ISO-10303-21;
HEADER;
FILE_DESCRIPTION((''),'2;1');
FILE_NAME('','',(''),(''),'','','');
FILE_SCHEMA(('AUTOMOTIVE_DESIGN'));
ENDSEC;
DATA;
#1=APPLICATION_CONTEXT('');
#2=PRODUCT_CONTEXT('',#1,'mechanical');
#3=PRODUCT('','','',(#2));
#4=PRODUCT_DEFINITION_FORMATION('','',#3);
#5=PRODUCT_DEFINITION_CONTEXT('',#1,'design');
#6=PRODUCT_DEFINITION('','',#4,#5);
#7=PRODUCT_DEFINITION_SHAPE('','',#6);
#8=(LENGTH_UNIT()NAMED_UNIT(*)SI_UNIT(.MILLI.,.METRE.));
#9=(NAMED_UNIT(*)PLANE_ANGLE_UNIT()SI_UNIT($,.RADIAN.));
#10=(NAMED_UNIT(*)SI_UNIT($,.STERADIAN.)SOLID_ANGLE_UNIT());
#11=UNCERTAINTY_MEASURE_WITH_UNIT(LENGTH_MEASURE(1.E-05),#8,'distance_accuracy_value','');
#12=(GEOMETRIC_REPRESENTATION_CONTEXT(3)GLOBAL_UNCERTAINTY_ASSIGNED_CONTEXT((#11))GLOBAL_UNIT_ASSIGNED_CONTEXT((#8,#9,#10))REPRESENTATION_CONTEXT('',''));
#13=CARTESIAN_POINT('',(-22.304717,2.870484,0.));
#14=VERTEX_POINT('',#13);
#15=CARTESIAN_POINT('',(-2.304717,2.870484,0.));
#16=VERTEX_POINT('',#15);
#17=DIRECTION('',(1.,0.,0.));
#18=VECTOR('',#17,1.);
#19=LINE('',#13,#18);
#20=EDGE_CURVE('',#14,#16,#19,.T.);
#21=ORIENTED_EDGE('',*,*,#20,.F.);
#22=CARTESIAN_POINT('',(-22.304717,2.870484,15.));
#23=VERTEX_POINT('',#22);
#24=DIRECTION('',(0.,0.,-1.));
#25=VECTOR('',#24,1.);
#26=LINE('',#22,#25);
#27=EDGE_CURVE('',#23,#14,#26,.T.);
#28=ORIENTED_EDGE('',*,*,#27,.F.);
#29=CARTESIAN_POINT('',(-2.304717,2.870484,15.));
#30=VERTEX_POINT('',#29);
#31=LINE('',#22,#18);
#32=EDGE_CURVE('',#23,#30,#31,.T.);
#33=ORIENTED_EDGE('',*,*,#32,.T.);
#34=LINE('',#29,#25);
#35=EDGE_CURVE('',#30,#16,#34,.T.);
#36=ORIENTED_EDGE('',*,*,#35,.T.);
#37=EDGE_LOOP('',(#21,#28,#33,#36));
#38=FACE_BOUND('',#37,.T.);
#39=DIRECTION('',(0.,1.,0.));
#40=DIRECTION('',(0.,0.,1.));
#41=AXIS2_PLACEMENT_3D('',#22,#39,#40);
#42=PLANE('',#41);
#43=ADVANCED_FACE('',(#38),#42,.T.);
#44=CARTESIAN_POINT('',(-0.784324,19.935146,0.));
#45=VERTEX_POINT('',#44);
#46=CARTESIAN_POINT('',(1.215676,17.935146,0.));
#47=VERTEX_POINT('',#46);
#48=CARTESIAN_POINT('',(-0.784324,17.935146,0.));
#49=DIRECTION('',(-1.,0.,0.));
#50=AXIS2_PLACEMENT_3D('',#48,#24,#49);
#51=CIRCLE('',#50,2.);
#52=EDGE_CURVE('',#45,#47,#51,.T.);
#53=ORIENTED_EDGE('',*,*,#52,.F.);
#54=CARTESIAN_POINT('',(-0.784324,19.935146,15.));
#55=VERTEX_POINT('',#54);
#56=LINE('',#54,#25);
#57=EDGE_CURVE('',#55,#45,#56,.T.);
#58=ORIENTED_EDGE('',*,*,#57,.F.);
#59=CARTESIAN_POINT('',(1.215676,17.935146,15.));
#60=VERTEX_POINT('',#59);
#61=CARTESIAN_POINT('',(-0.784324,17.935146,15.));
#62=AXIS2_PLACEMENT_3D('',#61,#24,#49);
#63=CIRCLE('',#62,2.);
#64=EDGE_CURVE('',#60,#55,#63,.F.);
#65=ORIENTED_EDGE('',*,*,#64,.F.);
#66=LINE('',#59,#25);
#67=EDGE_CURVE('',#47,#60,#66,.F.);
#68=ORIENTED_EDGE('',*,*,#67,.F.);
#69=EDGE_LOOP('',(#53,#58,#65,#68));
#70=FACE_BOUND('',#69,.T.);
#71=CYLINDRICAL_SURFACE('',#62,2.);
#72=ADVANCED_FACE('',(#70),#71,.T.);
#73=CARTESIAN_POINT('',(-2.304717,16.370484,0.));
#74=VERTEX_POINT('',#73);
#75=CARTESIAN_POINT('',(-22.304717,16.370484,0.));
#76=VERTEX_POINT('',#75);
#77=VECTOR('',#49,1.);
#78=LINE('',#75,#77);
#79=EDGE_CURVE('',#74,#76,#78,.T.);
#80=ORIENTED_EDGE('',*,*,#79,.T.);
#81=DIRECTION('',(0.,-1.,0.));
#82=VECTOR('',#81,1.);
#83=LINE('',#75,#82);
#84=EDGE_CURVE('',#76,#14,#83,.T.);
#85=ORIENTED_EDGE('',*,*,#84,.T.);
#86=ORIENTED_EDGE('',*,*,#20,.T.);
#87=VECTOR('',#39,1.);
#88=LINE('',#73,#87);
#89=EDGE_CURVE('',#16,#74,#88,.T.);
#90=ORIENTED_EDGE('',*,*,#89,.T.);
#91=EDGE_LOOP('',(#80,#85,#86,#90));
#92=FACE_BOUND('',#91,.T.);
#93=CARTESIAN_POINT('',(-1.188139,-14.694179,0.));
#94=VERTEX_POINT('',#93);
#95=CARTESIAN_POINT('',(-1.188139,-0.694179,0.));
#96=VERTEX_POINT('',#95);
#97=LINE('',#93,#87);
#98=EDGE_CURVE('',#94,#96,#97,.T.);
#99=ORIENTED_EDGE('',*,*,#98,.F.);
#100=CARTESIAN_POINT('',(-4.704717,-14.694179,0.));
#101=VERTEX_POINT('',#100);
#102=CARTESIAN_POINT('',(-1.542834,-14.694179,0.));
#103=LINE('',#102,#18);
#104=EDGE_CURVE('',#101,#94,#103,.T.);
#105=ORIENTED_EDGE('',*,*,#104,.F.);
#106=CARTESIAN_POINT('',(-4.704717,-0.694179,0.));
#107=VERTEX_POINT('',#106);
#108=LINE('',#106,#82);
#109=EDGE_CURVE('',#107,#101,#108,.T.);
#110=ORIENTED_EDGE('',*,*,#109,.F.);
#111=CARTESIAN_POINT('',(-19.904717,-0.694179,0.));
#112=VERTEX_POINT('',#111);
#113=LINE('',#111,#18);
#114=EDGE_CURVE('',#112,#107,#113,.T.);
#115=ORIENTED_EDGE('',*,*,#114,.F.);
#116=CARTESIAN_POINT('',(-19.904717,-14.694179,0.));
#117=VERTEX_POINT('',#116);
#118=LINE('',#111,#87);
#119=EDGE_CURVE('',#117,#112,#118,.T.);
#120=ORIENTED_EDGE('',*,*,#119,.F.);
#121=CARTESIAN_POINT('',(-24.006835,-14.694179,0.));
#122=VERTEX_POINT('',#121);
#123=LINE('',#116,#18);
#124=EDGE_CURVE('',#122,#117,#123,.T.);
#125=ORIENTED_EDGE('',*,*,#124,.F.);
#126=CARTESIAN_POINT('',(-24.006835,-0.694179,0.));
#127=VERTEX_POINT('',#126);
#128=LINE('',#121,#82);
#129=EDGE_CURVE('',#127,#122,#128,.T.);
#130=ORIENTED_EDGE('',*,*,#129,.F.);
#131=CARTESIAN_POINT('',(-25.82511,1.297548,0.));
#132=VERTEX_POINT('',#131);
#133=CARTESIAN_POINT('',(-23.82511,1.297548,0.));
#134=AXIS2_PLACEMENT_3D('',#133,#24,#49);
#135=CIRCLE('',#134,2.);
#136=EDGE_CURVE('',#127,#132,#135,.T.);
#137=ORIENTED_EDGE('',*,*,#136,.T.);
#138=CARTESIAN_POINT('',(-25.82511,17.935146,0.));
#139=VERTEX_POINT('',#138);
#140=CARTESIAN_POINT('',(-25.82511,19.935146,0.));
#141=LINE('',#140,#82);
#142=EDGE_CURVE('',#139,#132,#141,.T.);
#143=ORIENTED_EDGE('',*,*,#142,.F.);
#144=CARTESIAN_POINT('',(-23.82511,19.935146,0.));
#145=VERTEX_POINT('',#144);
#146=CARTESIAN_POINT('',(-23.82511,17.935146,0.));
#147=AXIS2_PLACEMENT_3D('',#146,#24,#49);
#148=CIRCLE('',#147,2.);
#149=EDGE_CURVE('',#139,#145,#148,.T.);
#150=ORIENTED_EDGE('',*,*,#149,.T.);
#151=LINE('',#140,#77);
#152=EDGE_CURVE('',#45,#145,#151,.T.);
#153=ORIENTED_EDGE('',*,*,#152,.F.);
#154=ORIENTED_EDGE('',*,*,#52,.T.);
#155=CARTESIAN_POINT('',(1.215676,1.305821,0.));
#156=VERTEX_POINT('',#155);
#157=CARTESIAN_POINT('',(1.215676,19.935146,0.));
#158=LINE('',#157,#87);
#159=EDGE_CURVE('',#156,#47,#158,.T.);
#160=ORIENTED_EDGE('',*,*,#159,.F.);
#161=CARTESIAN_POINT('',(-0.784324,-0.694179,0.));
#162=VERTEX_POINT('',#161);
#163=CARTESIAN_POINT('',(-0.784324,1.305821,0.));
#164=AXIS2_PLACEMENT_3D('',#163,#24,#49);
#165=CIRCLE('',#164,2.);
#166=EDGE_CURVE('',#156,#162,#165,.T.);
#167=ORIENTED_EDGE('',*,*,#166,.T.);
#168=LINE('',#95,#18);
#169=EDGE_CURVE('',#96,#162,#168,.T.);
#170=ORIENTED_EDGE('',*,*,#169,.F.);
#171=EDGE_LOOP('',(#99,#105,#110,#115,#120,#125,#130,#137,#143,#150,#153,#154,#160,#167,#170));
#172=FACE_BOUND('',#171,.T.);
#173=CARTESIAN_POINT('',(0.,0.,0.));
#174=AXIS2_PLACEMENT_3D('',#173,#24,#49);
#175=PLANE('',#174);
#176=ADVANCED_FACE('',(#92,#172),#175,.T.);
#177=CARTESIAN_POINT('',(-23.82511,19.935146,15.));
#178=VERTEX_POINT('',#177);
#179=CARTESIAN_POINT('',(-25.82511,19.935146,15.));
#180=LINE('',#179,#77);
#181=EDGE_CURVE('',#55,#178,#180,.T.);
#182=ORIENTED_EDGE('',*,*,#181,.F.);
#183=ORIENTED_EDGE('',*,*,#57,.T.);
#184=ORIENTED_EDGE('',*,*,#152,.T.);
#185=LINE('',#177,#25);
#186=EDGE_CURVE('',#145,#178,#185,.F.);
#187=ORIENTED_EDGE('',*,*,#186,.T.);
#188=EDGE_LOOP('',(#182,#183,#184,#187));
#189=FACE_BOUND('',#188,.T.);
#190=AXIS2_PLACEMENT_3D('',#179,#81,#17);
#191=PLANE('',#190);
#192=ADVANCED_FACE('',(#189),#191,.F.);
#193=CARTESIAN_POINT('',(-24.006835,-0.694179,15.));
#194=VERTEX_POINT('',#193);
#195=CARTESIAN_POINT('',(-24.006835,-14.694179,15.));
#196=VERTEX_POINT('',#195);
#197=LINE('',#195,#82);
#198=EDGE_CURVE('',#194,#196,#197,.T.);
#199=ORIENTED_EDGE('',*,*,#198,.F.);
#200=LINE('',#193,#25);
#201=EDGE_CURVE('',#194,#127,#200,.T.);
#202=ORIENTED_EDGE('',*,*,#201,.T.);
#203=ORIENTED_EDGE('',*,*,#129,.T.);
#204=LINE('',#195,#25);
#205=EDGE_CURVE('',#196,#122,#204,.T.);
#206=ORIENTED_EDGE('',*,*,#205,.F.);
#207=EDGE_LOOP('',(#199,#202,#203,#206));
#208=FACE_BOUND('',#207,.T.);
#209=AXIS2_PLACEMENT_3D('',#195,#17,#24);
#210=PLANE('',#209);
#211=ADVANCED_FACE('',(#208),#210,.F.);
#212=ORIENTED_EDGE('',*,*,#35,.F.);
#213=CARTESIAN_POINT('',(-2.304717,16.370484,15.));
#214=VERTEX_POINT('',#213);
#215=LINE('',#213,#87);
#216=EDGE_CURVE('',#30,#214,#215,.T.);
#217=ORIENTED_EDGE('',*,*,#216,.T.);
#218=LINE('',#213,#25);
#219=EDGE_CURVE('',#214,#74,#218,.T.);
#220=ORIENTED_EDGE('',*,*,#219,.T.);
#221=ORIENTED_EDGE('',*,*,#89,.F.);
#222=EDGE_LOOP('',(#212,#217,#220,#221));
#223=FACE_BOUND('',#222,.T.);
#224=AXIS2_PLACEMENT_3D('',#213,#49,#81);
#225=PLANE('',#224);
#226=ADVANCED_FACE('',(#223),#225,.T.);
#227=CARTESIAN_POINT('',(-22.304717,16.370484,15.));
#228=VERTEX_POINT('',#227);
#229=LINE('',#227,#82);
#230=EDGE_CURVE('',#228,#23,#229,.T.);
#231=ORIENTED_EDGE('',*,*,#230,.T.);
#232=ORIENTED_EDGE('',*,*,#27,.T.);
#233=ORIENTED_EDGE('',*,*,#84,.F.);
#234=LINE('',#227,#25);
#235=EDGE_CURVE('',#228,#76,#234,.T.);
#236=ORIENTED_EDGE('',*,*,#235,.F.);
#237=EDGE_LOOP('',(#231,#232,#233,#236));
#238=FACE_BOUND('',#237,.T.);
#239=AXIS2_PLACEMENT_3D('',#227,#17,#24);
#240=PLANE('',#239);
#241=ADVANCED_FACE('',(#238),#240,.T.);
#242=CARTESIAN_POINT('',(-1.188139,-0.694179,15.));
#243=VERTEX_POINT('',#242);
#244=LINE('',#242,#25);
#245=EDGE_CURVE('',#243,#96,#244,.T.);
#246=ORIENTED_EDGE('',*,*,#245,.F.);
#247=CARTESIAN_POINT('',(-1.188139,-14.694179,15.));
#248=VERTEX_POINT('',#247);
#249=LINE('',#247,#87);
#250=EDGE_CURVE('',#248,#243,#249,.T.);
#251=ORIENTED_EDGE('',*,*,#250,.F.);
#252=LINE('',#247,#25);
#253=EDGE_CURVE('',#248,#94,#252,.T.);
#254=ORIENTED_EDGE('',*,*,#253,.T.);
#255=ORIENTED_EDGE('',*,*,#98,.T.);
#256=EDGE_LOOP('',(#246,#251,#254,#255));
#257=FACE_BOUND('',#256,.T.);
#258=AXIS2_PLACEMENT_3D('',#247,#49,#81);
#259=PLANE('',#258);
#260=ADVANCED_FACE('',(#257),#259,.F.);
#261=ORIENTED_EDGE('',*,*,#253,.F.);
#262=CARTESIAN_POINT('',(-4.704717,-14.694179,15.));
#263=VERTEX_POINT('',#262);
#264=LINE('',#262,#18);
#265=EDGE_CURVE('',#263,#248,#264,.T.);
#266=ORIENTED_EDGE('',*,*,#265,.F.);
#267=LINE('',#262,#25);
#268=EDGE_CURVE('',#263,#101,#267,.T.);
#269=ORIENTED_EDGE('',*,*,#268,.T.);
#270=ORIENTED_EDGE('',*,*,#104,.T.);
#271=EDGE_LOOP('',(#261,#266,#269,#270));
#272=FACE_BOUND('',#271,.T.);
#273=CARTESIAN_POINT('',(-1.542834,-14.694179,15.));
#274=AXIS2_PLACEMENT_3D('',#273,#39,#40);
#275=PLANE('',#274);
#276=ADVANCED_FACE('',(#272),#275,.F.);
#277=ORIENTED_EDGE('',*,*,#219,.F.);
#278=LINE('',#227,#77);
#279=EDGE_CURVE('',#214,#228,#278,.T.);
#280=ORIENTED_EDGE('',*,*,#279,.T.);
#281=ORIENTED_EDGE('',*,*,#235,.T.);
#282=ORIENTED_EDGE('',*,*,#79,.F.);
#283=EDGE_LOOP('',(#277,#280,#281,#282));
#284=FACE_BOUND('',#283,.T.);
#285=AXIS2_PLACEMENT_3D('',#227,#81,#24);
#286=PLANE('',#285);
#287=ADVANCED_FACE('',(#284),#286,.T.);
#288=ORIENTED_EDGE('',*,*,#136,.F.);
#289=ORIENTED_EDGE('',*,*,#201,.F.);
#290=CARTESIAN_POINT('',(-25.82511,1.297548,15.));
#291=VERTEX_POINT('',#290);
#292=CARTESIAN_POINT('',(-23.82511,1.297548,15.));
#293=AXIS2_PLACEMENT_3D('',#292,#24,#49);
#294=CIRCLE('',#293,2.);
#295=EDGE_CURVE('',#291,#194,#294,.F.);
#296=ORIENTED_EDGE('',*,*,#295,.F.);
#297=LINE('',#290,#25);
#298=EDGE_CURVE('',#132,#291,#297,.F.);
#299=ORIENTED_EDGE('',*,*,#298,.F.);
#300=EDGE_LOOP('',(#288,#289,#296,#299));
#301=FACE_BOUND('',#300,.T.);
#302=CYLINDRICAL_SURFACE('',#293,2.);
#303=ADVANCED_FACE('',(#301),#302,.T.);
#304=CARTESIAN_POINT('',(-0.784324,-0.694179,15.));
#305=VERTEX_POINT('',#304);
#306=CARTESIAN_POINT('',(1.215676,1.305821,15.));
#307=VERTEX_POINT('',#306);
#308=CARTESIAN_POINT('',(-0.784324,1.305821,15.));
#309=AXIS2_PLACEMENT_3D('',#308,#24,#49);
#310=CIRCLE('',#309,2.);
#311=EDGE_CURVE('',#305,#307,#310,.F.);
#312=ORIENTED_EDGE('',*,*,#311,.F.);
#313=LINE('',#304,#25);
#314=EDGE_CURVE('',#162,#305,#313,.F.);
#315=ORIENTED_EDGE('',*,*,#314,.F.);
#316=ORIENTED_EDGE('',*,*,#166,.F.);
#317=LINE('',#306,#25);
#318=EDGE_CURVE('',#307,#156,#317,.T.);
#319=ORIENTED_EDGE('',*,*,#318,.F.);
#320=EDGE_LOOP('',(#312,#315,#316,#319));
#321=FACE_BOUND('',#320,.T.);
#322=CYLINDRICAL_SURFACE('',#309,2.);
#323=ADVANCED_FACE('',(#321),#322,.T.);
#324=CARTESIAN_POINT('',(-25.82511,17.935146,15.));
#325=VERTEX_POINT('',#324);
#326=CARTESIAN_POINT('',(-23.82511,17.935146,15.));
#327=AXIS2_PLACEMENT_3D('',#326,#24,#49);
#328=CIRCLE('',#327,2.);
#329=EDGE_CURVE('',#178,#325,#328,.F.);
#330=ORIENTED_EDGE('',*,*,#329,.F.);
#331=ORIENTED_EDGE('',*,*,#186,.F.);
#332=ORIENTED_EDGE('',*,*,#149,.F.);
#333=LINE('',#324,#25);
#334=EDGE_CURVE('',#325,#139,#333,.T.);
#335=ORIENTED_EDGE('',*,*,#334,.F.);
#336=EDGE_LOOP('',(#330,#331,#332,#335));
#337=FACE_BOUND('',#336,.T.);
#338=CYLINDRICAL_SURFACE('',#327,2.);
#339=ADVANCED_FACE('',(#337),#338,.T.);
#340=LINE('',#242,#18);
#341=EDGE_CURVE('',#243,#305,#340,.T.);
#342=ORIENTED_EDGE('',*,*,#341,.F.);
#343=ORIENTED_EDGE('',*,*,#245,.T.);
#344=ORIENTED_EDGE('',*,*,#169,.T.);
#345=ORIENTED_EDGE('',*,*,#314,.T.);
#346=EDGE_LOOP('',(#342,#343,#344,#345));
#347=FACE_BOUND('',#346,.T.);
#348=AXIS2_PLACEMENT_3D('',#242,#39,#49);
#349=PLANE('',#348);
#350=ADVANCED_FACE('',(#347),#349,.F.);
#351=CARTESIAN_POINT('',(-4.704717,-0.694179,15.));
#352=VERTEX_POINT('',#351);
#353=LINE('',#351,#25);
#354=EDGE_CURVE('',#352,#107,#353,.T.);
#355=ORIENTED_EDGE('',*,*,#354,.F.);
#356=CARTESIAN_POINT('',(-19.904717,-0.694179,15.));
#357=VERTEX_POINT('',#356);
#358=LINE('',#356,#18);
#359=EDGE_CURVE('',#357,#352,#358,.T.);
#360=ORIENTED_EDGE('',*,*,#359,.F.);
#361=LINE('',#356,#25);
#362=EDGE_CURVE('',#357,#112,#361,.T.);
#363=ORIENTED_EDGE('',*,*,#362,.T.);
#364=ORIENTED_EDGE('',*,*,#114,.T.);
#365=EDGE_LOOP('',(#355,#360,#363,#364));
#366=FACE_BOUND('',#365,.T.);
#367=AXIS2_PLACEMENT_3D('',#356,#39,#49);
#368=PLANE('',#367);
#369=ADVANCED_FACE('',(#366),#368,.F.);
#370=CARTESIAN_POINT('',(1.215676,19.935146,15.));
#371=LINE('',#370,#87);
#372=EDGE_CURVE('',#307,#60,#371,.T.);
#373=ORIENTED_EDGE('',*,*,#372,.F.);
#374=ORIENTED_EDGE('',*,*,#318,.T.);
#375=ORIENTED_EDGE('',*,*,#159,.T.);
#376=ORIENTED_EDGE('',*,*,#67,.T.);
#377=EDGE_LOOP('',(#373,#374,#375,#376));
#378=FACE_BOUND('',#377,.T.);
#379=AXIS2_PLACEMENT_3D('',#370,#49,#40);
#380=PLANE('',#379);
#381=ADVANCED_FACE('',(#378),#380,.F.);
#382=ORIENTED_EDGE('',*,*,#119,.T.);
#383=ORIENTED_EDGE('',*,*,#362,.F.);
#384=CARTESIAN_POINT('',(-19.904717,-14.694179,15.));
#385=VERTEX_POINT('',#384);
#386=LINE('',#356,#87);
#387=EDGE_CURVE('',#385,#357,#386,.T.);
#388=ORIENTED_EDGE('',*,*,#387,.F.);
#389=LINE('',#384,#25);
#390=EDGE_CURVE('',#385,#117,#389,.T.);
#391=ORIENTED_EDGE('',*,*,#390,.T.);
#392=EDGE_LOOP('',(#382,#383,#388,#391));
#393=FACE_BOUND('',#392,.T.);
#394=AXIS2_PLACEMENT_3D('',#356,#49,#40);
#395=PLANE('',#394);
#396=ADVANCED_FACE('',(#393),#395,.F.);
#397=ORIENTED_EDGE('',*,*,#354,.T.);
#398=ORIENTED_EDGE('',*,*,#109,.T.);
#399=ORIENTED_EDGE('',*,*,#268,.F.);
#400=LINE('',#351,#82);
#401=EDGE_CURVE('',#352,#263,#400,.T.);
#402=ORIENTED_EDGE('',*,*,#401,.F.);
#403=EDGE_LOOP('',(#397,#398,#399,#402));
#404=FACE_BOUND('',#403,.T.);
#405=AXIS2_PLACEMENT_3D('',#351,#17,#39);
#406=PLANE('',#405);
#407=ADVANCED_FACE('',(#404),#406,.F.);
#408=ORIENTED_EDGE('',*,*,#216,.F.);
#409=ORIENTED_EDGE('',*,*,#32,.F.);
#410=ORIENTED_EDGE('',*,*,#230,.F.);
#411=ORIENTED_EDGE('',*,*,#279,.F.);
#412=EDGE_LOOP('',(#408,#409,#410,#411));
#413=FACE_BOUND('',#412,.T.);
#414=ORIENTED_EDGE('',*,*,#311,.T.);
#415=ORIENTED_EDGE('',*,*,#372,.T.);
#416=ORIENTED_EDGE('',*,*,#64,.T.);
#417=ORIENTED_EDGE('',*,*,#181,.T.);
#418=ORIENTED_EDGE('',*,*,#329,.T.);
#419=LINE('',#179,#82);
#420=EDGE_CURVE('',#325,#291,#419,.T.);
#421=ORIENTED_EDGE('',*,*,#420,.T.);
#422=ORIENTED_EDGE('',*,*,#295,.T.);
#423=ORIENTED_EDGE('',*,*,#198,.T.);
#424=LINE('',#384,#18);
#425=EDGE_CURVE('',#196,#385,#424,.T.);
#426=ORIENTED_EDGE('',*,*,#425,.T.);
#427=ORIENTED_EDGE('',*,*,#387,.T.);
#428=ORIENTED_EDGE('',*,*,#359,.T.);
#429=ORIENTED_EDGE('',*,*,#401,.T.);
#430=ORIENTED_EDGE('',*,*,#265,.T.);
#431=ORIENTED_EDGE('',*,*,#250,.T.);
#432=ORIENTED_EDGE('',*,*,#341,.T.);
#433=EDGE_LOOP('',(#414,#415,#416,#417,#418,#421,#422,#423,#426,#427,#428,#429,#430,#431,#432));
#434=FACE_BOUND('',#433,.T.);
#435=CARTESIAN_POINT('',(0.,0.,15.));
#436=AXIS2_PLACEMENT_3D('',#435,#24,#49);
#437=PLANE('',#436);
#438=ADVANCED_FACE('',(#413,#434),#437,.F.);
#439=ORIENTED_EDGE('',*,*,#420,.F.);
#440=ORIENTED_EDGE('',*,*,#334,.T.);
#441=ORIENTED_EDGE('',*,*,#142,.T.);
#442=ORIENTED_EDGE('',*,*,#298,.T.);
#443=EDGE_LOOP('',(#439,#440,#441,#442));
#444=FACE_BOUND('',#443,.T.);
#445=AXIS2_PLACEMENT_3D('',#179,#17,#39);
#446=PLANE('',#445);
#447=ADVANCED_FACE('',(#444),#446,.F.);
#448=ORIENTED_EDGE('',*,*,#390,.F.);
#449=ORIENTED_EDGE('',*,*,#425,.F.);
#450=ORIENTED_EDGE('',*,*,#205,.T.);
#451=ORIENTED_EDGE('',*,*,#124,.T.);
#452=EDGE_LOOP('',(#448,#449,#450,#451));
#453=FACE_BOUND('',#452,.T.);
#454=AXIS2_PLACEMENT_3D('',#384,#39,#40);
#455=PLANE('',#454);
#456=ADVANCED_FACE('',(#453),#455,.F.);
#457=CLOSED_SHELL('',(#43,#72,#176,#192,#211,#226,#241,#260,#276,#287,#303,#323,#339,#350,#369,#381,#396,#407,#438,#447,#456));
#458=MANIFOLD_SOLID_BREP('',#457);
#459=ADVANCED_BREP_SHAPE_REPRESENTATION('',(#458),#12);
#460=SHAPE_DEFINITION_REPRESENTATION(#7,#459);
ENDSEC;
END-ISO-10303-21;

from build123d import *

# Parameters (mm, degrees)
SKETCH1_W           = 20
SKETCH1_H           = 13.5
BOSS_EXTRUDE1_DEPTH = 15
FILLET1_R           = 2


with BuildPart() as part:
    # Sketch1 → Boss-Extrude1 (new body)
    with BuildSketch(Plane.XY):
        Polygon((-25.825109991, 19.935146109), (1.215675598, 19.935146109), (1.215675598, -0.694178906), (-1.188139158, -0.694178906), (-1.188139158, -14.694178906), (-1.542833918, -14.694178906), (-4.704717196, -14.694178906), (-4.704717196, -0.694178906), (-19.904717196, -0.694178906), (-19.904717196, -14.694178906), (-24.006835368, -14.694178906), (-24.006835368, -0.694178906), (-25.825109991, -0.694178906), align=None)
        with Locations((-12.304717196, 9.620483601)):
            Rectangle(SKETCH1_W, SKETCH1_H, mode=Mode.SUBTRACT)
    extrude(amount=BOSS_EXTRUDE1_DEPTH)

    # Fillet1
    # the kernel refuses this fillet: 2 mm, written as the material it takes off along each edge
    with BuildSketch(Plane(origin=(-25.825109991, -0.694178906, -4.979317152), x_dir=(1, 0, 0), z_dir=(0, 0, 1))) as fillet1_piece_1:
        with BuildLine():
            CenterArc((2, 1.991726861), FILLET1_R, 180, 84.786761144)
            Line((0, 1.991726861), (-0.04, 1.991726861))
            Line((-0.04, 1.991726861), (-0.04, 0))
            Line((-0.04, 0), (0, -0.04))
            ThreePointArc((0, -0.04), (0.909137312, -0.04), (1.814640116, -0.039834537))
            Line((1.814640116, -0.039834537), (1.818274623, 0))
        make_face()
    extrude(amount=24.958634303, mode=Mode.SUBTRACT)
    with BuildSketch(Plane(origin=(-25.825109991, 19.935146109, -5), x_dir=(1, 0, 0), z_dir=(0, 0, 1)), Plane(origin=(1.215675598, -0.694178906, -5), x_dir=(-1, 0, 0), z_dir=(0, 0, 1))) as fillet1_piece_2:
        with BuildLine():
            CenterArc((FILLET1_R, -FILLET1_R), FILLET1_R, 90, 90)
            Line((0, -FILLET1_R), (-FILLET1_R * 0.02, -FILLET1_R))
            Line((-FILLET1_R * 0.02, -FILLET1_R), (-FILLET1_R * 0.02, FILLET1_R * 0.02))
            Line((-FILLET1_R * 0.02, FILLET1_R * 0.02), (FILLET1_R, FILLET1_R * 0.02))
            Line((FILLET1_R, FILLET1_R * 0.02), (FILLET1_R, 0))
        make_face()
    extrude(amount=25, mode=Mode.SUBTRACT)
    with BuildSketch(Plane(origin=(1.215675598, 19.935146109, -5), x_dir=(-1, 0, 0), z_dir=(0, 0, 1))) as fillet1_piece_3:
        with BuildLine():
            CenterArc((FILLET1_R, FILLET1_R), FILLET1_R, 180, 90)
            Line((0, FILLET1_R), (-FILLET1_R * 0.02, FILLET1_R))
            Line((-FILLET1_R * 0.02, FILLET1_R), (-FILLET1_R * 0.02, -FILLET1_R * 0.02))
            Line((-FILLET1_R * 0.02, -FILLET1_R * 0.02), (FILLET1_R, -FILLET1_R * 0.02))
            Line((FILLET1_R, -FILLET1_R * 0.02), (FILLET1_R, 0))
        make_face()
    extrude(amount=25, mode=Mode.SUBTRACT)


solid = part.part
